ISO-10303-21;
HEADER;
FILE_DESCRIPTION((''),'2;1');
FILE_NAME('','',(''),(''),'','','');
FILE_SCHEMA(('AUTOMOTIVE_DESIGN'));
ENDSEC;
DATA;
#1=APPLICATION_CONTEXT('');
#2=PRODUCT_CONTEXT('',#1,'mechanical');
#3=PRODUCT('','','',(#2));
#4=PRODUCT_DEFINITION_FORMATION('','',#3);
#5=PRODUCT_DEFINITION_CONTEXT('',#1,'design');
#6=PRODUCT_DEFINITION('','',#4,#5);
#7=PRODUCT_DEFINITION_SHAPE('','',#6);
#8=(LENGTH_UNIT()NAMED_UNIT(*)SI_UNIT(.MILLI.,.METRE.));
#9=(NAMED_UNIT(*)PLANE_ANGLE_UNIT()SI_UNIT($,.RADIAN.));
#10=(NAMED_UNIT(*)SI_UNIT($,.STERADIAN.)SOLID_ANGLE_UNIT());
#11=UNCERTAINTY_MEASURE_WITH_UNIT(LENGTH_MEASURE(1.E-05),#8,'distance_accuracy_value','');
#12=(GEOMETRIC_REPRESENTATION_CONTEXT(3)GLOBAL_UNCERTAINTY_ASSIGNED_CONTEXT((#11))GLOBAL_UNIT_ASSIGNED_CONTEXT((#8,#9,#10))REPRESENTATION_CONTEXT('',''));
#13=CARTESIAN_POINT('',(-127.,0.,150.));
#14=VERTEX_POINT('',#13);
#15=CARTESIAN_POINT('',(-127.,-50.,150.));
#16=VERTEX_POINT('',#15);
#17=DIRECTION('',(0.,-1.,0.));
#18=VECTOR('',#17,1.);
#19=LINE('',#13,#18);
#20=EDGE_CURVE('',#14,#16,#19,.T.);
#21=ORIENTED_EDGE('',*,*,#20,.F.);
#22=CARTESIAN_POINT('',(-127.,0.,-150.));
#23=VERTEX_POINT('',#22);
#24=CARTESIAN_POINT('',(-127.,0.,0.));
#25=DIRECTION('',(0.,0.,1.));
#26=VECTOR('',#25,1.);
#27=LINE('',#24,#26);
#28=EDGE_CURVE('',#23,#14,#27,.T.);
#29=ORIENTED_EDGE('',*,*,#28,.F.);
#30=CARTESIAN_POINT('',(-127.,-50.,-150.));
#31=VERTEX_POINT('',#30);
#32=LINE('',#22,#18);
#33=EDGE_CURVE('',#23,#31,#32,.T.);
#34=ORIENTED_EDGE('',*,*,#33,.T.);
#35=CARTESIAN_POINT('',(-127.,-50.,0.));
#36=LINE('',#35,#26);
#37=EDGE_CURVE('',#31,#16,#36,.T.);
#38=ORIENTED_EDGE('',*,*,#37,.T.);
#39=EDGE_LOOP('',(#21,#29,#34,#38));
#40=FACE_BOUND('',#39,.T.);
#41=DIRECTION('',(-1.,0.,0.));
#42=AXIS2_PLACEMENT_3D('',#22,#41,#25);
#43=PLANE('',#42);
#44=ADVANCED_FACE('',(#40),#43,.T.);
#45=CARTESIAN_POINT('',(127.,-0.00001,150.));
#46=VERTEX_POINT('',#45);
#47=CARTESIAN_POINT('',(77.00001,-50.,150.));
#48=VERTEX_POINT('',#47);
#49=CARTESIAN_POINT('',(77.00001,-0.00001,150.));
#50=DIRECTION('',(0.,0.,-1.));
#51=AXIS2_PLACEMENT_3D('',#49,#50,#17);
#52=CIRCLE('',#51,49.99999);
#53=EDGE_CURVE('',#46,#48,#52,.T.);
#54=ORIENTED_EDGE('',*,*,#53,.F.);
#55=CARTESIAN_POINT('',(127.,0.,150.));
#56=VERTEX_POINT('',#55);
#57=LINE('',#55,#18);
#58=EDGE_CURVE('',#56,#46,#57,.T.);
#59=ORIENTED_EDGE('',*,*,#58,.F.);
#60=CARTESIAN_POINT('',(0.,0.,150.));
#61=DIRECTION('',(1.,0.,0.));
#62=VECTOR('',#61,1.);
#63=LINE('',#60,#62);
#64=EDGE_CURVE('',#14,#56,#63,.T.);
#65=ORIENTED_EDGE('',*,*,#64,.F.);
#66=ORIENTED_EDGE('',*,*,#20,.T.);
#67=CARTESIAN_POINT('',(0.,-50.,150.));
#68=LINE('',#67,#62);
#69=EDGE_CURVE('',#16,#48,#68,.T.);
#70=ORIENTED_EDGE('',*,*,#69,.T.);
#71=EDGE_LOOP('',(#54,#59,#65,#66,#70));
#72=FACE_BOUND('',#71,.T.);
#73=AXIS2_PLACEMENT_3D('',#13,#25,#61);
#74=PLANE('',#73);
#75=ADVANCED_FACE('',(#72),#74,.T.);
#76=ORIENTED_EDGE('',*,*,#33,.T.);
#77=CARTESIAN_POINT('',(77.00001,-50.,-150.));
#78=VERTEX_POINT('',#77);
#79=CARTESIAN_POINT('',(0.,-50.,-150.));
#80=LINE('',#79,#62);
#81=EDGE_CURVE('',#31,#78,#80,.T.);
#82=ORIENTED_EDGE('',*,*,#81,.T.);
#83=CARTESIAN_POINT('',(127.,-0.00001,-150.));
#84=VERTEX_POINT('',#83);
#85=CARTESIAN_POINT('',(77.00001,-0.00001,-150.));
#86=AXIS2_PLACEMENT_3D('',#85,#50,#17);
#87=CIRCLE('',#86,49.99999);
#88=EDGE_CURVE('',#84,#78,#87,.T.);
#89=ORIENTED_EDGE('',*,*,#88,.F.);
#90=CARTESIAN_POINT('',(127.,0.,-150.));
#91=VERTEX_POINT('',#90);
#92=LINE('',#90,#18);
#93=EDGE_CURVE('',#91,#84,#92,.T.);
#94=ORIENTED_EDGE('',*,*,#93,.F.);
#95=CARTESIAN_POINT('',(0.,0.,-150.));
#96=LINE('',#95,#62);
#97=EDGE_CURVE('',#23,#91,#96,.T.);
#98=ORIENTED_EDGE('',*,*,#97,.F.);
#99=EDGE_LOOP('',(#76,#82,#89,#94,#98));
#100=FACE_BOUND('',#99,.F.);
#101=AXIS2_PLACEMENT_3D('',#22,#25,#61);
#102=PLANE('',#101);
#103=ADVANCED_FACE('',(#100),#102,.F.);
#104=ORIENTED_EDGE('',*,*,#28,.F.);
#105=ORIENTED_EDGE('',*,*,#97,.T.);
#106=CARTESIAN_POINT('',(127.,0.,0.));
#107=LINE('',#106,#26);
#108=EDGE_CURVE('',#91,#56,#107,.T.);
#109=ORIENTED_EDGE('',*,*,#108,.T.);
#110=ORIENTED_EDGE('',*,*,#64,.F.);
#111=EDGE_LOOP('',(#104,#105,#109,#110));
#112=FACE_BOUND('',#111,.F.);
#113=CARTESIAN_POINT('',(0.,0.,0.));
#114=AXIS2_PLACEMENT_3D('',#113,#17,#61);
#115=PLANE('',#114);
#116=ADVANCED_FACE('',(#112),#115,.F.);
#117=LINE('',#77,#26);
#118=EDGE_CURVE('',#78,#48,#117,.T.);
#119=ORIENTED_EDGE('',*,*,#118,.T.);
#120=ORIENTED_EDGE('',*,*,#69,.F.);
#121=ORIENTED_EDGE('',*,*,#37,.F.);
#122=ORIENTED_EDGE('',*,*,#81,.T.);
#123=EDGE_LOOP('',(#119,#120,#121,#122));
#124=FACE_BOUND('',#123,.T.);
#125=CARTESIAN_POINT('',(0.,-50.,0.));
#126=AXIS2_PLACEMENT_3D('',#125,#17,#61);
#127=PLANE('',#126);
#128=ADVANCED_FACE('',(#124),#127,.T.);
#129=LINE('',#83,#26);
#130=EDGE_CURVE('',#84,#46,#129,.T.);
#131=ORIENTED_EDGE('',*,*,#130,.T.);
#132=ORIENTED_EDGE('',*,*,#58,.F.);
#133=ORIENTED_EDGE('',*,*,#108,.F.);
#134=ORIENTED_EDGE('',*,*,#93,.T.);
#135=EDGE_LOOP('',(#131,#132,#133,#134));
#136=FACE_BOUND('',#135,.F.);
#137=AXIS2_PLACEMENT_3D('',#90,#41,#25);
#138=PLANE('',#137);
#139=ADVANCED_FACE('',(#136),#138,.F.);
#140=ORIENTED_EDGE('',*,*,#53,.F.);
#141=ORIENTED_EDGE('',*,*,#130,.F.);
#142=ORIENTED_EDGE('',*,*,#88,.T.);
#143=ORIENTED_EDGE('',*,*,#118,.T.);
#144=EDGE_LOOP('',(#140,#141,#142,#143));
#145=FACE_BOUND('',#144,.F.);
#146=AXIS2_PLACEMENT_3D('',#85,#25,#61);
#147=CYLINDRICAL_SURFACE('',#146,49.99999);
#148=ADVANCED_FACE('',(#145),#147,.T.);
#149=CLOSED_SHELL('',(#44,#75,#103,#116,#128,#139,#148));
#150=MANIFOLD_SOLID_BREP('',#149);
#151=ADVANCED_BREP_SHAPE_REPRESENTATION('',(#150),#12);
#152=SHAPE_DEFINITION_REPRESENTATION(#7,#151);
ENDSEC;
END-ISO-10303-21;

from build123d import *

# Parameters (mm, degrees)
F0_W     = 254
F0_H     = 300
F2_DEPTH = 50
F3_R     = 49.99999


# Not quite as in the source:
# - a fillet or chamfer is up to 0.001 mm smaller than in the source, because OpenCascade refuses the exact size


with BuildPart() as f2:
    # F0 (on Front) → F2 (new body)
    with BuildSketch(Plane.XZ):
        Rectangle(F0_W, F0_H)
    extrude(amount=F2_DEPTH)

    # F3 (radius 50 in the source; OpenCascade refuses exactly that, so slightly less here)
    f3_edges = [f2.edges().sort_by_distance(p)[0] for p in [
        (127, -50, 0),
    ]]
    fillet(f3_edges, radius=F3_R)


solid = f2.part
